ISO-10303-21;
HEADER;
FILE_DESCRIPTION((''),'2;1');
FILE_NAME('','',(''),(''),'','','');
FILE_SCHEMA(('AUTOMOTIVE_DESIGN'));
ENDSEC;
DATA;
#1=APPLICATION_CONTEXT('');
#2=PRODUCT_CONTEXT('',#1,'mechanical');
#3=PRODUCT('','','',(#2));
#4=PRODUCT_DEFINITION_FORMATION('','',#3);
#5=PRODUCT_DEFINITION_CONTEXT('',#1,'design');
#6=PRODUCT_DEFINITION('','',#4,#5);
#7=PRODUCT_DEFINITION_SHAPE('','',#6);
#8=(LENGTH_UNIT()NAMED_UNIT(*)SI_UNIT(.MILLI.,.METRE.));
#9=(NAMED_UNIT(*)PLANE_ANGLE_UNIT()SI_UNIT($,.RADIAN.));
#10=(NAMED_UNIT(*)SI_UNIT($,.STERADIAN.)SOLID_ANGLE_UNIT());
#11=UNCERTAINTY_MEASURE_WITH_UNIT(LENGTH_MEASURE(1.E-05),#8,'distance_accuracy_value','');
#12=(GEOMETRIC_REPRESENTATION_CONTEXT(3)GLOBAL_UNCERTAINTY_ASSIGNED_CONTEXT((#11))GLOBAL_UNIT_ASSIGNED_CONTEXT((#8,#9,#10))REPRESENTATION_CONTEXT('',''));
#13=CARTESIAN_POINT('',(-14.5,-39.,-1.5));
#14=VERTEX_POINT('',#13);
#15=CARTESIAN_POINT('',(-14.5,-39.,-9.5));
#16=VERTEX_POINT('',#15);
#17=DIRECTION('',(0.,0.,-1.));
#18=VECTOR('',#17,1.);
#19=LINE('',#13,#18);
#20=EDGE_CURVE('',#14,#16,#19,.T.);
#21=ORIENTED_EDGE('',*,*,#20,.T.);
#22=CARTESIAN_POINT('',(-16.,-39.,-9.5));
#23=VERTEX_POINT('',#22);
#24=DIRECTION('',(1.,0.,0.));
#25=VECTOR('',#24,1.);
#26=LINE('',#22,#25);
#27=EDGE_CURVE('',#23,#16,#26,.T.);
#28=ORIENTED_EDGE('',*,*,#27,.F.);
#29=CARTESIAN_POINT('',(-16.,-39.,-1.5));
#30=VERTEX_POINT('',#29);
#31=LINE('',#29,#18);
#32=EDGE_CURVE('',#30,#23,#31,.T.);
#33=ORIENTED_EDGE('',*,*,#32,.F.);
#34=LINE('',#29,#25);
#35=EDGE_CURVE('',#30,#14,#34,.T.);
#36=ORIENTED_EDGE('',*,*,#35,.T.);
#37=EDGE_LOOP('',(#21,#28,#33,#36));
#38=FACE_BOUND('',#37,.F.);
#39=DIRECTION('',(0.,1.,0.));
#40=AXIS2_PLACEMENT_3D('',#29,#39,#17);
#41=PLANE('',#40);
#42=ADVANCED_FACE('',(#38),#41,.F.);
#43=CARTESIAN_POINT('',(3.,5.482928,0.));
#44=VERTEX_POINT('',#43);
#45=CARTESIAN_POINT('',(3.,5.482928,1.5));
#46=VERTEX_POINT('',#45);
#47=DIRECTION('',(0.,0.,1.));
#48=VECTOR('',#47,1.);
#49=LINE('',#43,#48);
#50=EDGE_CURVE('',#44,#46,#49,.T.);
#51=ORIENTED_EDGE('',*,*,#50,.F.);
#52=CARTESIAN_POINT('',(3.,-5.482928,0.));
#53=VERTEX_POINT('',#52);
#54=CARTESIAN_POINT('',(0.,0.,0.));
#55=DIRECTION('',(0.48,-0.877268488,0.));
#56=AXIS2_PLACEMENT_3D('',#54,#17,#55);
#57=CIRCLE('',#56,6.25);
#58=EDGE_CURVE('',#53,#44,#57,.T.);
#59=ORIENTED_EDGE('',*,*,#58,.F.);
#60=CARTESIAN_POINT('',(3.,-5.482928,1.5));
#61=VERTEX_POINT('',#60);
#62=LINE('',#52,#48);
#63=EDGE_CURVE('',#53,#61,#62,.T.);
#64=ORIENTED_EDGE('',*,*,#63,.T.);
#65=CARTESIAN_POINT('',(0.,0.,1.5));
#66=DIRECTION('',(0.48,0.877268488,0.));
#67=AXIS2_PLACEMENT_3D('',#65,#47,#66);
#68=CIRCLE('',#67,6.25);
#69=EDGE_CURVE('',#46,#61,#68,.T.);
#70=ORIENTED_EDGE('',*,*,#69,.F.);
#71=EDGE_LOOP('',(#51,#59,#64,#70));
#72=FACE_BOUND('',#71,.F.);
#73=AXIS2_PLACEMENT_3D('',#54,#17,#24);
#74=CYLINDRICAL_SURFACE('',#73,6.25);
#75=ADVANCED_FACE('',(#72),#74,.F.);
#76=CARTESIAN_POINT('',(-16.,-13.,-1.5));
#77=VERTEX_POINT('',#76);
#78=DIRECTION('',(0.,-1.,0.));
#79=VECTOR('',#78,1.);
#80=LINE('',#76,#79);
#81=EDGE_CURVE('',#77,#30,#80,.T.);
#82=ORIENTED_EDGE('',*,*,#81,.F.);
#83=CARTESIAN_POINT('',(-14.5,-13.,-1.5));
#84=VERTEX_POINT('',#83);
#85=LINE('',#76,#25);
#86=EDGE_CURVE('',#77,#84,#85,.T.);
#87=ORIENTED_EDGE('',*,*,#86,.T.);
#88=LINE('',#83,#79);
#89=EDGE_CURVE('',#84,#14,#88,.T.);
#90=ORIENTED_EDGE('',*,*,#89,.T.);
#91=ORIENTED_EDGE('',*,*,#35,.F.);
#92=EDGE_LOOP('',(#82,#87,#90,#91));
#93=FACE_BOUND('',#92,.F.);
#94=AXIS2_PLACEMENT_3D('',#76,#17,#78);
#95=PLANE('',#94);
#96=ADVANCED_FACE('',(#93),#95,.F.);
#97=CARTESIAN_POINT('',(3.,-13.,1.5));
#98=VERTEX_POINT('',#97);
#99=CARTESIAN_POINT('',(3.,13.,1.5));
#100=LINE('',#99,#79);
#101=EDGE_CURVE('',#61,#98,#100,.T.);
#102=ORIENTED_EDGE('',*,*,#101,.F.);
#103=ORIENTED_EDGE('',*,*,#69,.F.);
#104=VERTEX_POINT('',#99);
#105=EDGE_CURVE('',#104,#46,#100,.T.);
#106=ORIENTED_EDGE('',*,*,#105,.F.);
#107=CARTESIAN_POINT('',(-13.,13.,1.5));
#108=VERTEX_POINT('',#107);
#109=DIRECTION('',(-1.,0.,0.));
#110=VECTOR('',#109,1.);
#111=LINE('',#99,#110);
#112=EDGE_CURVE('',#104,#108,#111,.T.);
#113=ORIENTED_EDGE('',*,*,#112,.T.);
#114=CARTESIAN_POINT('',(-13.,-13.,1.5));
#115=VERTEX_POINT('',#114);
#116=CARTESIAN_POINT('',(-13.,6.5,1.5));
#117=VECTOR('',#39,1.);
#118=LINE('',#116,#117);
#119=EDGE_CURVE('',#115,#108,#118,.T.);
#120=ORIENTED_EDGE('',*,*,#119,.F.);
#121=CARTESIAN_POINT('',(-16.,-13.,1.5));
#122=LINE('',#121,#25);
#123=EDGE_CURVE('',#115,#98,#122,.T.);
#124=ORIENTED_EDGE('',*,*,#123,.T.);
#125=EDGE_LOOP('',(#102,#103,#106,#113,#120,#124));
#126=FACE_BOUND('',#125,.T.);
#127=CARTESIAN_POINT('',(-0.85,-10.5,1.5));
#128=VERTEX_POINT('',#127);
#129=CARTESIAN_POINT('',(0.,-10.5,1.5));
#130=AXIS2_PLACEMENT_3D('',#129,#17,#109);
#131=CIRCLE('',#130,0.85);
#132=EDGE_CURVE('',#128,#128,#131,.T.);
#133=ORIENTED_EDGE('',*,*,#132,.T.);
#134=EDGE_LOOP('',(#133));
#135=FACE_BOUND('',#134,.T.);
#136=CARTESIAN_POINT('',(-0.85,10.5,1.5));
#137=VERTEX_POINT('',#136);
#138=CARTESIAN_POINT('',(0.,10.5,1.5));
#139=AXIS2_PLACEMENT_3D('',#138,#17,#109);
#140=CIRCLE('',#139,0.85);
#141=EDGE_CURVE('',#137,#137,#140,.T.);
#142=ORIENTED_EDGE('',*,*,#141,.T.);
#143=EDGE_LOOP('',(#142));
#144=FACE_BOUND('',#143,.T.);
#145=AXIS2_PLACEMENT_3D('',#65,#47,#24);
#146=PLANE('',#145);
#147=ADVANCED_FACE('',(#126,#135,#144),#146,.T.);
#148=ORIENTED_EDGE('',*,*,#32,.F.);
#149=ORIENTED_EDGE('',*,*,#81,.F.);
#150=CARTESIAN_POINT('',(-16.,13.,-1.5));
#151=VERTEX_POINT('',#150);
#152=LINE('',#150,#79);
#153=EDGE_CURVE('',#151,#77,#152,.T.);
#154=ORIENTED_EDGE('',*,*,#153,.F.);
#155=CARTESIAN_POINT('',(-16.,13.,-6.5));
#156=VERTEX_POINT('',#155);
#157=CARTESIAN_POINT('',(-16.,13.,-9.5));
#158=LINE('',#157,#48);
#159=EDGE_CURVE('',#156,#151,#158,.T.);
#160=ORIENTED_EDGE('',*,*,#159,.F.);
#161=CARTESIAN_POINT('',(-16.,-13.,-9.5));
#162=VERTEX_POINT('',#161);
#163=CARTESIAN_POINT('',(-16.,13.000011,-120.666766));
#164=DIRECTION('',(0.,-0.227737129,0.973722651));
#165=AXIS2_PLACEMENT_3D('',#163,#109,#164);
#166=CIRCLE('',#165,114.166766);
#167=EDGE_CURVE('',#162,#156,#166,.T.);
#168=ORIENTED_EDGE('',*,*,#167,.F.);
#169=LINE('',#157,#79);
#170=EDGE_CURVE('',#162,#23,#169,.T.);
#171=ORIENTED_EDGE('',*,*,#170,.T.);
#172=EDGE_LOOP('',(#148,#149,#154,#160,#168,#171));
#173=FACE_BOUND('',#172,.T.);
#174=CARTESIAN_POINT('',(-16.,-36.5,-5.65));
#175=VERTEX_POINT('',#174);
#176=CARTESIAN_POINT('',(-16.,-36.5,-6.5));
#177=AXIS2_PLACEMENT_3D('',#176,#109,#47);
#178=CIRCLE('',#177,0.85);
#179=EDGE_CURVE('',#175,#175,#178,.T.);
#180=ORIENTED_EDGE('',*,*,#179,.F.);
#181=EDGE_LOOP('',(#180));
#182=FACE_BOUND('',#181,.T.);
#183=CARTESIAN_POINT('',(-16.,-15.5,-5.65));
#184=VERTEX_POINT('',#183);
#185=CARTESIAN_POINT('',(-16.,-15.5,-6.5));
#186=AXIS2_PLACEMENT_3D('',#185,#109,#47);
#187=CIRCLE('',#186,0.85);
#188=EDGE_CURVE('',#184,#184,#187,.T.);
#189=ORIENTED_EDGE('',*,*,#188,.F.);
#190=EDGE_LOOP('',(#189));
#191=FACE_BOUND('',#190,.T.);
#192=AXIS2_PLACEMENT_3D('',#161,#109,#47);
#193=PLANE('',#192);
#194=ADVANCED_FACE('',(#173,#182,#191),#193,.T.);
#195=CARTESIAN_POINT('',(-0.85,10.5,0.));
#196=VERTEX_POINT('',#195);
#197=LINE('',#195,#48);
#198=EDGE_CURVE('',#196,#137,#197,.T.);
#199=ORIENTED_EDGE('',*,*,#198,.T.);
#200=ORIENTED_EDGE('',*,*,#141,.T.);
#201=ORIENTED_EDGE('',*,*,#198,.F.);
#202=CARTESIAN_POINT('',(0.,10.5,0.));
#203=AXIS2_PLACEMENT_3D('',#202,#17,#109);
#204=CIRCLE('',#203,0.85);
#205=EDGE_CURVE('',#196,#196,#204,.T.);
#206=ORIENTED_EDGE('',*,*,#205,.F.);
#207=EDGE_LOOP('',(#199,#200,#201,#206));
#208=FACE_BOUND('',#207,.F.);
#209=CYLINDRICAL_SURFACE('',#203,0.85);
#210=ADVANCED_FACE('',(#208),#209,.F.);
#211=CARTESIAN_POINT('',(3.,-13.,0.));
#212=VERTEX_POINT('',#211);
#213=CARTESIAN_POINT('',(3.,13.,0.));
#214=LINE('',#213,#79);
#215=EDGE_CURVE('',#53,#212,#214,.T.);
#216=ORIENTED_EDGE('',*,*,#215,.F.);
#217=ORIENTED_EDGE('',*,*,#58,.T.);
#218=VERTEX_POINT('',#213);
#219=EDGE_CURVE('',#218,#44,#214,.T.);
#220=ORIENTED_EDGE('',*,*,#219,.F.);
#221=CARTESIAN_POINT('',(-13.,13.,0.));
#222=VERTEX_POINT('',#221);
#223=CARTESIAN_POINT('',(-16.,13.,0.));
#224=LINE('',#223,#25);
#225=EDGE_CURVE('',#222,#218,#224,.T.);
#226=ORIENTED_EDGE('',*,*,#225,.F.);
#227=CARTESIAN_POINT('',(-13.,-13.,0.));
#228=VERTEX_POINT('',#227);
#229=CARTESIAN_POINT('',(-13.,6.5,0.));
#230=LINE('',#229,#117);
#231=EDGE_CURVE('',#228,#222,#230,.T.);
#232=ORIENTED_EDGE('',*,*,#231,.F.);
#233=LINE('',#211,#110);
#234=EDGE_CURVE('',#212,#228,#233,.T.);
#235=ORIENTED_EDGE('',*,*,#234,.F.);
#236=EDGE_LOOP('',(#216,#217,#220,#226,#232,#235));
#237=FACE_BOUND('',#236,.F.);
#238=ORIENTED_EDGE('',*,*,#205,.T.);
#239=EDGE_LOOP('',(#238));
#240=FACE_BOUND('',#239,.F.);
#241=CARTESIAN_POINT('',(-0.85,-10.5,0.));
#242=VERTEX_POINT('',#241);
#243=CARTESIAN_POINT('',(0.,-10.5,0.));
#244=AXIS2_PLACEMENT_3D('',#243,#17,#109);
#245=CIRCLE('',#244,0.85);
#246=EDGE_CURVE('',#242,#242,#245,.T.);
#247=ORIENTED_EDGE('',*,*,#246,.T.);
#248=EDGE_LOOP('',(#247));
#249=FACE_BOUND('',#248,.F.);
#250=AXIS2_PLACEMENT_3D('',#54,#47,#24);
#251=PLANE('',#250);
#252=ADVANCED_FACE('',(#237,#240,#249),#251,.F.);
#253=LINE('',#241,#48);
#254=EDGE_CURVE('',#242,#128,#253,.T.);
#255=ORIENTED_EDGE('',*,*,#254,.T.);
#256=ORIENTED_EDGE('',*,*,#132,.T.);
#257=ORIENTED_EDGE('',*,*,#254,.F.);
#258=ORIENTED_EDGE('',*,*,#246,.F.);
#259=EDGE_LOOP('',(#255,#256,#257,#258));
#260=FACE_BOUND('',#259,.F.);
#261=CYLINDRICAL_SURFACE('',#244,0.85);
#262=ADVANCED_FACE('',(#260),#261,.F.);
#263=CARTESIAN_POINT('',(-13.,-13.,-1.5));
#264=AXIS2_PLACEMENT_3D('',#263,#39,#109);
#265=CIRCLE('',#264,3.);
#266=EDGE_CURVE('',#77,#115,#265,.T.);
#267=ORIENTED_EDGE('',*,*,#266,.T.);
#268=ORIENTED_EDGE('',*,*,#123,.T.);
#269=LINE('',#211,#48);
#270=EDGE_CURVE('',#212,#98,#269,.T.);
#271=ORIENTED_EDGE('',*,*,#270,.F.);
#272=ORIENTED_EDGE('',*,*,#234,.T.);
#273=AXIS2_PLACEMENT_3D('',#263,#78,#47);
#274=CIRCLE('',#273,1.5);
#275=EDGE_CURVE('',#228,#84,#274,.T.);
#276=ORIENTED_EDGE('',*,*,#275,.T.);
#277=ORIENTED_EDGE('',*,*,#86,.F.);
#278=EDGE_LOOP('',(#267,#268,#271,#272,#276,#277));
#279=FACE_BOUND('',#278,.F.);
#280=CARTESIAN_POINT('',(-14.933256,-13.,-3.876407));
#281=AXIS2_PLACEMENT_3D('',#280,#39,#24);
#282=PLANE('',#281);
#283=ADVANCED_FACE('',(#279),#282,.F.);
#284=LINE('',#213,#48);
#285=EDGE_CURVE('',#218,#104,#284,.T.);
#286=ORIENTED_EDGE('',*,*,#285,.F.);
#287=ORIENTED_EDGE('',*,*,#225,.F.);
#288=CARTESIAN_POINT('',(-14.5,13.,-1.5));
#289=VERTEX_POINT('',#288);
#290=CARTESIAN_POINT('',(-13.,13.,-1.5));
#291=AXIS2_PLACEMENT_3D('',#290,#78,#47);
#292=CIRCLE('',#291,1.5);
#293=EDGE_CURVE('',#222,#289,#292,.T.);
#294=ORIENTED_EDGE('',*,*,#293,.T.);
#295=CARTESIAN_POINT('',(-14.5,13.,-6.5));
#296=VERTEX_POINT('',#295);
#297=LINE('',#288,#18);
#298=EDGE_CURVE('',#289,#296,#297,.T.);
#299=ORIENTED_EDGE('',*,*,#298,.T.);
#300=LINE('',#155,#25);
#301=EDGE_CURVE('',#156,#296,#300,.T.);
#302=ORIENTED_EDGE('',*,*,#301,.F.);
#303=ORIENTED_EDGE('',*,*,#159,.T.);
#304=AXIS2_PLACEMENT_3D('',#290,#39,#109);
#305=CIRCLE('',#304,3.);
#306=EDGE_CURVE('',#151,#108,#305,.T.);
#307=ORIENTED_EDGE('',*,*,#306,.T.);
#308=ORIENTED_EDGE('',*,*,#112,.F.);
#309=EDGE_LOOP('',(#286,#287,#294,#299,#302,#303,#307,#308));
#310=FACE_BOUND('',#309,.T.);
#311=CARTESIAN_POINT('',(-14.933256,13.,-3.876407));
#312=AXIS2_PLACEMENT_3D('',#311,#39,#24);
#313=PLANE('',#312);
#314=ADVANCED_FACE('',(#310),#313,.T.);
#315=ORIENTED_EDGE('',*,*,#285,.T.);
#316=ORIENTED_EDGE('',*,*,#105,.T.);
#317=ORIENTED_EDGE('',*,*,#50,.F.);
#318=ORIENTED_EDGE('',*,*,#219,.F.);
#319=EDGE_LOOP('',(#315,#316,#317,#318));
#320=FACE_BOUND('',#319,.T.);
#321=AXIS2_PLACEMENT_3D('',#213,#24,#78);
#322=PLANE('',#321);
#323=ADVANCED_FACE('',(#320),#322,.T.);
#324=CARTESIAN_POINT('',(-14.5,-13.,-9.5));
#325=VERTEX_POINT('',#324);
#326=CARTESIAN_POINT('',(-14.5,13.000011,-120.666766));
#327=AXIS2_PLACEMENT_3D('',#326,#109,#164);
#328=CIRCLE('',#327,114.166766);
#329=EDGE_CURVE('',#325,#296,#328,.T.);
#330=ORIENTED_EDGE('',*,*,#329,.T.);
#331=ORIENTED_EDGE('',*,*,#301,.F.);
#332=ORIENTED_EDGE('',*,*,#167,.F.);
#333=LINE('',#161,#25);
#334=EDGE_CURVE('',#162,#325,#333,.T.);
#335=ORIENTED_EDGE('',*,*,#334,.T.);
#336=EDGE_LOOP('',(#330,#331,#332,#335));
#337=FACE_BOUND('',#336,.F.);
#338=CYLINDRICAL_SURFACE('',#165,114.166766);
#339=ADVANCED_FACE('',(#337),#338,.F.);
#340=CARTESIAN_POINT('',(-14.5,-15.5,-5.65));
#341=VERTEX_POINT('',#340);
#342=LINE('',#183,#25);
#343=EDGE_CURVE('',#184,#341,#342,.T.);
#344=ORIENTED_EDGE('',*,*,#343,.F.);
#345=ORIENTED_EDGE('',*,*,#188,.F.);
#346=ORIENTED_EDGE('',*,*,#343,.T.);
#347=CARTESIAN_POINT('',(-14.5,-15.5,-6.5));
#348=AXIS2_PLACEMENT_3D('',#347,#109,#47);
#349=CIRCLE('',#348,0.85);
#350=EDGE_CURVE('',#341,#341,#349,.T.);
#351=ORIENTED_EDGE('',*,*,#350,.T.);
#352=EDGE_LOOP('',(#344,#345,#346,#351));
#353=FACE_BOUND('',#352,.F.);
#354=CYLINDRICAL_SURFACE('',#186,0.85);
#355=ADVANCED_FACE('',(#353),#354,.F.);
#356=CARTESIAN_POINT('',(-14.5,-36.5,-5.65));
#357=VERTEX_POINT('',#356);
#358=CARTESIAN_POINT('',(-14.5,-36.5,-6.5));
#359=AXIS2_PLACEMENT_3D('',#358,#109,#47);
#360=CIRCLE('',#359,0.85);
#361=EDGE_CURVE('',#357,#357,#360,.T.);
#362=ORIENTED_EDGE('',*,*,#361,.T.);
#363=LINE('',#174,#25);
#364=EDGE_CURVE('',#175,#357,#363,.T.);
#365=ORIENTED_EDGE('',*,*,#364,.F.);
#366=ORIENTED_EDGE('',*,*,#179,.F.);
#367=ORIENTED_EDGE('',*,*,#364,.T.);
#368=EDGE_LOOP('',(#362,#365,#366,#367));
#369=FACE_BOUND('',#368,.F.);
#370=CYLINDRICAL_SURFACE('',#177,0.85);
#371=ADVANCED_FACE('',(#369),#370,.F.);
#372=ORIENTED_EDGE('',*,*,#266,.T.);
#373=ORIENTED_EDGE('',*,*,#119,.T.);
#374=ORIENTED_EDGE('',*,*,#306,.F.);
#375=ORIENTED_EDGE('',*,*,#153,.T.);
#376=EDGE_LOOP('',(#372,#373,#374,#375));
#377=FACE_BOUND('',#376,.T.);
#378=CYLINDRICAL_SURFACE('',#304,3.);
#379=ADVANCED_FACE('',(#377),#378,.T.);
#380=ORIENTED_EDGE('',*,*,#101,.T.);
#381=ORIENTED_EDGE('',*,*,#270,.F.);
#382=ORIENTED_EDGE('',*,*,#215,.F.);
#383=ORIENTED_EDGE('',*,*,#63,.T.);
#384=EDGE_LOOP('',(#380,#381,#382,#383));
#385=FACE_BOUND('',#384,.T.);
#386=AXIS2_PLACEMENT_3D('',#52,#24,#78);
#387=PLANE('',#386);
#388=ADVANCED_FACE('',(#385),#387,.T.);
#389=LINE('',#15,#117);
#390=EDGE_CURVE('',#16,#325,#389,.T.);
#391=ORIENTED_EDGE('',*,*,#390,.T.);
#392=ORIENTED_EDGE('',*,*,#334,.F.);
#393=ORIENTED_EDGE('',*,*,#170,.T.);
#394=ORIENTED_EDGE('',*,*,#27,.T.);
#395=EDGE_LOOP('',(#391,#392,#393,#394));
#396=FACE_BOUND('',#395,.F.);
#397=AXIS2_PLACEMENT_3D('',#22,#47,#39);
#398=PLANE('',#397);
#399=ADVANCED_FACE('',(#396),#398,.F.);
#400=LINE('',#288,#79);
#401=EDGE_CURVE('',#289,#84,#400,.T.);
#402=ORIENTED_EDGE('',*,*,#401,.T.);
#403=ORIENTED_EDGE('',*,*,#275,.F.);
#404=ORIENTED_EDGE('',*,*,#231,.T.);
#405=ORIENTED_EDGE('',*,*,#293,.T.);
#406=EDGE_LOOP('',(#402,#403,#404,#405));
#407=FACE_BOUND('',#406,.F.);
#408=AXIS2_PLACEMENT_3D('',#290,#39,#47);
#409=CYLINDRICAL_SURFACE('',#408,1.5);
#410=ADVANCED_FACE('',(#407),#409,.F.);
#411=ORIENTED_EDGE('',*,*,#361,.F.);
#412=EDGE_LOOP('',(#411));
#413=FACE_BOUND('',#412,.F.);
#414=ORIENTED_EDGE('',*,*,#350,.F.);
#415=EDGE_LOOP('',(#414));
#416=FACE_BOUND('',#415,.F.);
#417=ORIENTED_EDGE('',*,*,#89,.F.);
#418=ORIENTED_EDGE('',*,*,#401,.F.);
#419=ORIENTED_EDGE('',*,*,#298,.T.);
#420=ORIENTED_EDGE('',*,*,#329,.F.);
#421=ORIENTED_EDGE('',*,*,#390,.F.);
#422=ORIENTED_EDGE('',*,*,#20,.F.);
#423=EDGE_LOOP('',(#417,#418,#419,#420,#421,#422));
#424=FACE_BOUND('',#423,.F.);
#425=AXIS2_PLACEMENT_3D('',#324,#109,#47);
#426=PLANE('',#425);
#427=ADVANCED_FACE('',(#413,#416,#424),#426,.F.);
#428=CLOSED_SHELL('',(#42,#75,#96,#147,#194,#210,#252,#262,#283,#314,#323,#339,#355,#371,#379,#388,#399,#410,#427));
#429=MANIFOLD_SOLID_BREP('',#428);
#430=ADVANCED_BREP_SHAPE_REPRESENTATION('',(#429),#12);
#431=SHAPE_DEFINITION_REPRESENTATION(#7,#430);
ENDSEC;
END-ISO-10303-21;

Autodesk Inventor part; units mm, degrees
ref_plane "YZ Plane" through (0, 0, 0) normal (1, 0, 0) x (0, 1, 0)
ref_plane "XZ Plane" through (0, 0, 0) normal (0, 1, 0) x (-1, 0, 0)
ref_plane "XY Plane" through (0, 0, 0) normal (0, 0, 1) x (1, 0, 0)
sketch "スケッチ1" plane through (0, 0, 0) normal (0, 0, 1) x (1, 0, 0)
  circle A0 centre (0, 0) radius 6.25
  line L0 (0, 13) -> (-16, 13)
  line L1 (-16, 13) -> (-16, -13)
  line L2 (-16, -13) -> (0, -13)
  line L3 (0, -13) -> (0, 13)
  line L4 (0, 13) -> (3, 13)
  line L5 (3, 13) -> (3, -13)
  line L6 (3, -13) -> (0, -13)
  line L7 (0, -13) -> (0, 13)
  point P0 (-16, 0)
  point P1 (3, -5.4829)
  point P2 (3, 5.4829)
  dimension "d0" = 12.5
  dimension "d1" = 16
  dimension "d2" = 26
  dimension "d3" = 3
extrude "プレート1" add sketch "スケッチ1" along normal blind 1.5 contours A0 L3 L4 L5 | L5 L6 L3 A0 | A0 L3 L2 L1 L0
sketch "スケッチ2" plane through (-14.5, 13, 1.5) normal (-1, 0, 0) x (0, -1, 0)
  line L0 (26, 0) -> (0, 0)
  line L1 (0, 0) -> (0, -11)
  line L2 (0, -11) -> (26, -11)
  line L3 (26, -11) -> (26, 0)
edge flange "フランジ1" height 11 angle 90 thickness 1.5 bend radius 1.5 thickness toward (-1, 0, 0) relief tear relief width 1.5 relief depth 0.75 edges at (-16, 0, 0) wall of the first edge with corners at (-14.5, -13, 1.5) (-14.5, 13, 1.5) (-14.5, 13, -9.5) (-14.5, -13, -9.5)
bend "曲げ1"
corner "コーナー1"
sketch "スケッチ3" plane through (-16, -13, -9.5) normal (-1, 0, 0) x (0, 0, 1)
  line L0 (8, 0) -> (0, 0) projected
  line L1 (0, 0) -> (8, 0)
  line L2 (8, 0) -> (8, -26)
  line L3 (8, -26) -> (0, -26)
  line L4 (0, -26) -> (0, 0)
  line L5 (8, 0) -> (8, 26) projected
  arc A0 (0, 0) -> (3, 26) centre (-111.1667, 26) ccw
  line L6 (3, 20) -> (3, 26) construction
  line L7 (0, 26) -> (8, 26) projected
  line L8 (0, 0) -> (0, 26) projected
  point P0 (9.5, 13)
  point P1 (8, 0)
  dimension "d15" = 26
  dimension "d21" = 5
sheet face with bend "面2" sketch "スケッチ3" thickness 1.5 toward (1, 0, 0) bend radius 1.5 contours L2 L3 L4 L0
bend "曲げ2"
extrude "切り取り1" cut sketch "スケッチ3" against normal blind 1.5 contours L8 L7 A0
sketch "スケッチ5" plane through (0, 0, 0) normal (0, 0, -1) x (-1, 0, 0)
  circle A0 centre (0, 10.5) radius 0.85 projected
  circle A1 centre (0, -10.5) radius 0.85 projected
  point P0 (0, 0)
extrude "切り取り2" cut sketch "スケッチ5" against normal blind 1.5
sketch "スケッチ6" plane through (-16, -39, -1.5) normal (-1, 0, 0) x (0, 0, 1)
  circle A0 centre (-5, 23.5) radius 0.85 projected
  circle A1 centre (-5, 2.5) radius 0.85 projected
  point P0 (1.5, 39)
extrude "切り取り3" cut sketch "スケッチ6" against normal blind 1.5
equation "\"d23\" = Thickness"
equation "\"d25\" = Thickness"
equation "\"d27\" = Thickness"
equation "\"d4\" = Thickness"
equation "\"d5\" = BendReliefWidth"
equation "\"d6\" = BendReliefDepth"
equation "\"d7\" = MinimumRemnant"
equation "\"d8\" = TransitionRadius"
equation "\"d11\" = BendRadius"
equation "\"d12\" = CornerReliefSize"
equation "\"d13\" = GapSize"
equation "\"d14\" = JacobiRadiusSize"
equation "\"d16\" = BendRadius"
equation "\"d17\" = BendReliefWidth"
equation "\"d19\" = MinimumRemnant"
equation "\"d18\" = BendReliefDepth"
equation "\"d20\" = TransitionRadius"
equation "\"BendRadius\" = Thickness"
equation "\"BendReliefWidth\" = Thickness"
equation "\"BendReliefDepth\" = 0.5 * Thickness"
equation "\"CornerReliefSize\" = 4 * Thickness"
equation "\"MinimumRemnant\" = 2 * Thickness"
equation "\"TransitionRadius\" = BendRadius"
equation "\"JacobiRadiusSize\" = BendRadius"
equation "\"GapSize\" = Thickness"
equation "\"Thickness\" = 1.5"
properties part number "hipjoint_toleg_under_right"
